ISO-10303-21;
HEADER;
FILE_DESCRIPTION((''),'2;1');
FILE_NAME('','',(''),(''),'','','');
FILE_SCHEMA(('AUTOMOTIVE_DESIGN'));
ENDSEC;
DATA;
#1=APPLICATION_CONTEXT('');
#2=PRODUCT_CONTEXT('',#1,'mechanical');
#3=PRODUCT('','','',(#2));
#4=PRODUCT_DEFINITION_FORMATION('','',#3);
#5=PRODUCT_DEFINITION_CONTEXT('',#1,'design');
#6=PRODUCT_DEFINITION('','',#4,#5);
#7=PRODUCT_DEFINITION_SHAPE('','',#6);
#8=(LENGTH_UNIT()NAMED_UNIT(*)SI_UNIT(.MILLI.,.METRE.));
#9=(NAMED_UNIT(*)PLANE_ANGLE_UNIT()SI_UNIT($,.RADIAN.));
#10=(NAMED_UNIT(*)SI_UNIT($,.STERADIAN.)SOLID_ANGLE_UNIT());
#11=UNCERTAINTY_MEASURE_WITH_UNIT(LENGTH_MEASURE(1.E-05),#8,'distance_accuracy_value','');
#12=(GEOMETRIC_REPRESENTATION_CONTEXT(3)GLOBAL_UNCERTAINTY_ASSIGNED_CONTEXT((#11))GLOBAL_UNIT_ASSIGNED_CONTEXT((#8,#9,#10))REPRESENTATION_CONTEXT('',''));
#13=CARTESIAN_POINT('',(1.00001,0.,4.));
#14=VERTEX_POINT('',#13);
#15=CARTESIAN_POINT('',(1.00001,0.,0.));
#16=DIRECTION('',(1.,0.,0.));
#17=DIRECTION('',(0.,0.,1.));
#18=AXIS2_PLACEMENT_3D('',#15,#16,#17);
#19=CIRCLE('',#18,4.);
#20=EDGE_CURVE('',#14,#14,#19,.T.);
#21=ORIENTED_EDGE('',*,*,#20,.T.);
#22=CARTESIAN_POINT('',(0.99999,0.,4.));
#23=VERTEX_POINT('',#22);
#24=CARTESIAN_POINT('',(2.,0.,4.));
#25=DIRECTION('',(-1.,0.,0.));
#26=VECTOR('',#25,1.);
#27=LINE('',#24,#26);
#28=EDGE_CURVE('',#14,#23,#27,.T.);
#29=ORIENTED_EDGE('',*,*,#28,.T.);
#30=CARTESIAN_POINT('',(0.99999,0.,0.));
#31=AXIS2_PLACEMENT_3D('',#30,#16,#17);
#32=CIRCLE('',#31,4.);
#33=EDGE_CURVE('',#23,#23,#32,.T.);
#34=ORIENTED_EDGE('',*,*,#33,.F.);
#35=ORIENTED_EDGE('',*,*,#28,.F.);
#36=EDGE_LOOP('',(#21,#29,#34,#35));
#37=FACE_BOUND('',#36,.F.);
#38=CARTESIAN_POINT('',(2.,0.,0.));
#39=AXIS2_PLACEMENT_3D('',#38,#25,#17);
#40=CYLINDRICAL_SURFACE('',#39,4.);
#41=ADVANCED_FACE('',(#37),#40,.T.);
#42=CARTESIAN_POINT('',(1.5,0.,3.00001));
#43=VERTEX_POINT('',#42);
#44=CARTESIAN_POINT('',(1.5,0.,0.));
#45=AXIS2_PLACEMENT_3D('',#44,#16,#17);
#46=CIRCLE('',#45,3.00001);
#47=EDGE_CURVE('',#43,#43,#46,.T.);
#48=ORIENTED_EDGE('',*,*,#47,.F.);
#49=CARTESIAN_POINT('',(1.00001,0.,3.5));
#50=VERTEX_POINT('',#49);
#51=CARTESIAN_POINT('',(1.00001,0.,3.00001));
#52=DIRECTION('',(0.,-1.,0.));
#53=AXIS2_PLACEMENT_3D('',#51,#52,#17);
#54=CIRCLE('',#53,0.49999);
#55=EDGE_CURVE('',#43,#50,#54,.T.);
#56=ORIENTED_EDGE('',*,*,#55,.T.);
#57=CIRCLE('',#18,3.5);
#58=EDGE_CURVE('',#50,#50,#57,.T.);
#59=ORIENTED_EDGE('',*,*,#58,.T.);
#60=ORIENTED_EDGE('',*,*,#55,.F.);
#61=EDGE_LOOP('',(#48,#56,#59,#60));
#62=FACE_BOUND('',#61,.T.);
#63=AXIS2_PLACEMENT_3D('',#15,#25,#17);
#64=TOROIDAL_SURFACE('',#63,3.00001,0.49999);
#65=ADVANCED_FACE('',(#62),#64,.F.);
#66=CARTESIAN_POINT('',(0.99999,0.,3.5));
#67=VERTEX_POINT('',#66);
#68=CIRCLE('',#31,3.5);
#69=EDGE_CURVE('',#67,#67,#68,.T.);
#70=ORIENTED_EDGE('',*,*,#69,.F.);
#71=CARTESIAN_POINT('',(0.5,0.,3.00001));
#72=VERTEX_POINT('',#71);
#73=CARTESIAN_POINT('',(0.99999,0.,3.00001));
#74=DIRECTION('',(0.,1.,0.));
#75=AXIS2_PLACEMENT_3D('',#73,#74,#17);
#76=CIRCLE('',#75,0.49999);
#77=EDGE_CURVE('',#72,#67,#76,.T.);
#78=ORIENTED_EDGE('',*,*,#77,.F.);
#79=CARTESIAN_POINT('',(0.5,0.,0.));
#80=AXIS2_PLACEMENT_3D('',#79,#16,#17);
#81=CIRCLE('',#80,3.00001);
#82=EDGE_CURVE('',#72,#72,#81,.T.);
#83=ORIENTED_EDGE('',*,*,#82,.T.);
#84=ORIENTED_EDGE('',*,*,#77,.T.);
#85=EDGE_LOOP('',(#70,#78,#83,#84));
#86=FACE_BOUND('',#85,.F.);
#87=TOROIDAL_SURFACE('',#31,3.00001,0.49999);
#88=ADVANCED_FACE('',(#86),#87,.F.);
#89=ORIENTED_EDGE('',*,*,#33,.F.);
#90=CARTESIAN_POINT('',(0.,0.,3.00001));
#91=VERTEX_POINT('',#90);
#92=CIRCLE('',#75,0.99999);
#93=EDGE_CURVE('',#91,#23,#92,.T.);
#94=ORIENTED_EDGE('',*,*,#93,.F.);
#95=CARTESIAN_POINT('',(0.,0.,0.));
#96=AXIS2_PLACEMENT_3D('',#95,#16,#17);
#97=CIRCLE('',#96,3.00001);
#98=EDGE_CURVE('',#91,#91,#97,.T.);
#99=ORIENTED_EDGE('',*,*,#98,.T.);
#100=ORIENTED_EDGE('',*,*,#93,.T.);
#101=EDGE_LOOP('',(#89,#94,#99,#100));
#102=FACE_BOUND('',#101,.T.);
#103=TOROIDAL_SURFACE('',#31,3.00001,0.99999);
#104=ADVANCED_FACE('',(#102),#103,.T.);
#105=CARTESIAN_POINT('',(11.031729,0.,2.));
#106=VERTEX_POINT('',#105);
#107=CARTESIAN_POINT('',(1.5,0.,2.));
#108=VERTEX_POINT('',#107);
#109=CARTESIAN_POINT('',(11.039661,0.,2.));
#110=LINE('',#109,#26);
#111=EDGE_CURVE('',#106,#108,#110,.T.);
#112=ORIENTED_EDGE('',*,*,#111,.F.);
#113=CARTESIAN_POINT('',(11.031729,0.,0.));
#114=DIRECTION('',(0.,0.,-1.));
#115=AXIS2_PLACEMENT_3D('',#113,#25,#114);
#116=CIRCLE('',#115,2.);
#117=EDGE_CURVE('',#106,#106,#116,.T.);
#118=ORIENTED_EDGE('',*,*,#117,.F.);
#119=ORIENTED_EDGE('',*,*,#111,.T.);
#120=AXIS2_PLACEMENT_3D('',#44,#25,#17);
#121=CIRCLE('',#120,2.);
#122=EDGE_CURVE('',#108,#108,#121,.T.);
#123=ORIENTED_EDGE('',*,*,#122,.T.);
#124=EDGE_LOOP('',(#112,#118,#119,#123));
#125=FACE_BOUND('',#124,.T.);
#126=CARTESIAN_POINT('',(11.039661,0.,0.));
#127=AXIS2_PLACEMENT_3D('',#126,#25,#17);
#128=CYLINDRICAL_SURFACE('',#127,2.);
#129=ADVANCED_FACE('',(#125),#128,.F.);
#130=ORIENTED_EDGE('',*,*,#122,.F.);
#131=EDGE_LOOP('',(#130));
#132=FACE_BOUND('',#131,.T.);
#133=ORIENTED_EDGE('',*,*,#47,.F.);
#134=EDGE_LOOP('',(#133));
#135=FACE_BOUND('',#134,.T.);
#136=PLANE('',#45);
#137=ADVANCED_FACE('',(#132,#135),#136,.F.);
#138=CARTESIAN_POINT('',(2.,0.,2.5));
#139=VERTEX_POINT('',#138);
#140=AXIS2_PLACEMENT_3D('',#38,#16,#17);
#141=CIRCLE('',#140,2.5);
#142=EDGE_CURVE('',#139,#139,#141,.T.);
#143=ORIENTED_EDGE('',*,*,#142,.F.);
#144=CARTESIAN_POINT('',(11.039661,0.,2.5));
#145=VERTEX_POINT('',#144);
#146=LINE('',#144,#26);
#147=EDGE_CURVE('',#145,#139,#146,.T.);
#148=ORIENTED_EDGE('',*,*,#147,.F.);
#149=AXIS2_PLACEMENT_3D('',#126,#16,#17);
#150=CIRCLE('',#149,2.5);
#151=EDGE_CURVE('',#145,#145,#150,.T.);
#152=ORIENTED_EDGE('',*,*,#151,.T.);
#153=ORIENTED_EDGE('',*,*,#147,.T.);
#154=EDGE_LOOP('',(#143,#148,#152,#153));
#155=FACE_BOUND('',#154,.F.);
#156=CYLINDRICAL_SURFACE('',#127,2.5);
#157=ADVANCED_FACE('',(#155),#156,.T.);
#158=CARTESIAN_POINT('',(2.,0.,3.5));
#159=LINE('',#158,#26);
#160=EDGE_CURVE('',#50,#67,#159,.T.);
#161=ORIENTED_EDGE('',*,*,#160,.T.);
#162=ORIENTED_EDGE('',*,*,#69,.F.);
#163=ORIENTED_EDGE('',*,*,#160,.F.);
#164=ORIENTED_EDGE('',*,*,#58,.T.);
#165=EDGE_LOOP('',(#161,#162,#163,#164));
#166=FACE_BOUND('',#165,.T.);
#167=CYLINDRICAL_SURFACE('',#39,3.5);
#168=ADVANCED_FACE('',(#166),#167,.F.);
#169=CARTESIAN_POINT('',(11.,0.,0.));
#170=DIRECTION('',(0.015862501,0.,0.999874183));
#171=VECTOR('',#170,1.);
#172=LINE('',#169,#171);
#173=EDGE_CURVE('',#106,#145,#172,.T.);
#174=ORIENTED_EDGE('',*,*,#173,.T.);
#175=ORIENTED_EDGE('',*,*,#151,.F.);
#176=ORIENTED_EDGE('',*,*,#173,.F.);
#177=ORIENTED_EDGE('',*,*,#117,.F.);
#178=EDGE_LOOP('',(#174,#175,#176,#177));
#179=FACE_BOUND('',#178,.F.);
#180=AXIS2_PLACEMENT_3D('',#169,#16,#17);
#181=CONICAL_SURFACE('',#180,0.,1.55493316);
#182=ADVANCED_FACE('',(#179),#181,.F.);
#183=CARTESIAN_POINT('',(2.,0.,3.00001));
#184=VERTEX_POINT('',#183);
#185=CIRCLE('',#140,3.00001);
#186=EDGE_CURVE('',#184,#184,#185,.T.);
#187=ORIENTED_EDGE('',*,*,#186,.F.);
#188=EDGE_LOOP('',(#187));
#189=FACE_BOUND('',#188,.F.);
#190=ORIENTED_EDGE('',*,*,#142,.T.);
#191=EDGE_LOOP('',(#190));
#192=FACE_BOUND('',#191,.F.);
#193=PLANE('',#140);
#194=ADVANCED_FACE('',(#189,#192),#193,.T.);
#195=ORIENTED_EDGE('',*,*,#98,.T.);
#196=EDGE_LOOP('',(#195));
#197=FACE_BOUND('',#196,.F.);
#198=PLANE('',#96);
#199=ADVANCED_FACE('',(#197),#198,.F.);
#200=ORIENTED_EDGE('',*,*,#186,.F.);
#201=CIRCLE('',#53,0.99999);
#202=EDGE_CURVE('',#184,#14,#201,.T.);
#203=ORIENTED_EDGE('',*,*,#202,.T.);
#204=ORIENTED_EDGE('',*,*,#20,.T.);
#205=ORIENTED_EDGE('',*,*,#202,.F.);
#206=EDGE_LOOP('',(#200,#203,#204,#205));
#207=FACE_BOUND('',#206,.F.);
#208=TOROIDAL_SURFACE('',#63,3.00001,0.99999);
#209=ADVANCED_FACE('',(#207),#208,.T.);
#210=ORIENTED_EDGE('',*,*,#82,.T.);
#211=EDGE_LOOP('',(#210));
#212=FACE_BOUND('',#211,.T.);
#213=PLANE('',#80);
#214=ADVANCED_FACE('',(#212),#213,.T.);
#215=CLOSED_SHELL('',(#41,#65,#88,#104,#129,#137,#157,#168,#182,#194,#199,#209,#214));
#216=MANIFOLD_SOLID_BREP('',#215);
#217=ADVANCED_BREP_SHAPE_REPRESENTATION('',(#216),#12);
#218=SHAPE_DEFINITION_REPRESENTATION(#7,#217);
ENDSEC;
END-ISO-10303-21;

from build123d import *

# Parameters (mm, degrees)
F4_R = 0.99999
F3_T = -0.5


# Not quite as in the source:
# - a fillet or chamfer is up to 0.001 mm smaller than in the source, because OpenCascade refuses the exact size


with BuildPart() as f2:
    # F0 (on Front) → F2 (revolve)
    with BuildSketch(Plane.XZ):
        Polygon((0, 4), (0, 0), (11, 0), (11.0396612436, 2.5), (2, 2.5), (2, 4), align=None)
    revolve(axis=Axis((6.7295320332, 0, 0), (1, 0, 0)))

    # F4 (radius 1 in the source; OpenCascade refuses exactly that, so slightly less here)
    f4_edges = [f2.edges().sort_by_distance(p)[0] for p in [
        (2, 0, -4),
        (0, 0, -4),
    ]]
    fillet(f4_edges, radius=F4_R)

    # F3
    f3_openings = [f2.faces().sort_by_distance(p)[0] for p in [
        (11.019831, 0, -1.25),
    ]]
    offset(amount=F3_T, openings=f3_openings, kind=Kind.INTERSECTION)


solid = f2.part
